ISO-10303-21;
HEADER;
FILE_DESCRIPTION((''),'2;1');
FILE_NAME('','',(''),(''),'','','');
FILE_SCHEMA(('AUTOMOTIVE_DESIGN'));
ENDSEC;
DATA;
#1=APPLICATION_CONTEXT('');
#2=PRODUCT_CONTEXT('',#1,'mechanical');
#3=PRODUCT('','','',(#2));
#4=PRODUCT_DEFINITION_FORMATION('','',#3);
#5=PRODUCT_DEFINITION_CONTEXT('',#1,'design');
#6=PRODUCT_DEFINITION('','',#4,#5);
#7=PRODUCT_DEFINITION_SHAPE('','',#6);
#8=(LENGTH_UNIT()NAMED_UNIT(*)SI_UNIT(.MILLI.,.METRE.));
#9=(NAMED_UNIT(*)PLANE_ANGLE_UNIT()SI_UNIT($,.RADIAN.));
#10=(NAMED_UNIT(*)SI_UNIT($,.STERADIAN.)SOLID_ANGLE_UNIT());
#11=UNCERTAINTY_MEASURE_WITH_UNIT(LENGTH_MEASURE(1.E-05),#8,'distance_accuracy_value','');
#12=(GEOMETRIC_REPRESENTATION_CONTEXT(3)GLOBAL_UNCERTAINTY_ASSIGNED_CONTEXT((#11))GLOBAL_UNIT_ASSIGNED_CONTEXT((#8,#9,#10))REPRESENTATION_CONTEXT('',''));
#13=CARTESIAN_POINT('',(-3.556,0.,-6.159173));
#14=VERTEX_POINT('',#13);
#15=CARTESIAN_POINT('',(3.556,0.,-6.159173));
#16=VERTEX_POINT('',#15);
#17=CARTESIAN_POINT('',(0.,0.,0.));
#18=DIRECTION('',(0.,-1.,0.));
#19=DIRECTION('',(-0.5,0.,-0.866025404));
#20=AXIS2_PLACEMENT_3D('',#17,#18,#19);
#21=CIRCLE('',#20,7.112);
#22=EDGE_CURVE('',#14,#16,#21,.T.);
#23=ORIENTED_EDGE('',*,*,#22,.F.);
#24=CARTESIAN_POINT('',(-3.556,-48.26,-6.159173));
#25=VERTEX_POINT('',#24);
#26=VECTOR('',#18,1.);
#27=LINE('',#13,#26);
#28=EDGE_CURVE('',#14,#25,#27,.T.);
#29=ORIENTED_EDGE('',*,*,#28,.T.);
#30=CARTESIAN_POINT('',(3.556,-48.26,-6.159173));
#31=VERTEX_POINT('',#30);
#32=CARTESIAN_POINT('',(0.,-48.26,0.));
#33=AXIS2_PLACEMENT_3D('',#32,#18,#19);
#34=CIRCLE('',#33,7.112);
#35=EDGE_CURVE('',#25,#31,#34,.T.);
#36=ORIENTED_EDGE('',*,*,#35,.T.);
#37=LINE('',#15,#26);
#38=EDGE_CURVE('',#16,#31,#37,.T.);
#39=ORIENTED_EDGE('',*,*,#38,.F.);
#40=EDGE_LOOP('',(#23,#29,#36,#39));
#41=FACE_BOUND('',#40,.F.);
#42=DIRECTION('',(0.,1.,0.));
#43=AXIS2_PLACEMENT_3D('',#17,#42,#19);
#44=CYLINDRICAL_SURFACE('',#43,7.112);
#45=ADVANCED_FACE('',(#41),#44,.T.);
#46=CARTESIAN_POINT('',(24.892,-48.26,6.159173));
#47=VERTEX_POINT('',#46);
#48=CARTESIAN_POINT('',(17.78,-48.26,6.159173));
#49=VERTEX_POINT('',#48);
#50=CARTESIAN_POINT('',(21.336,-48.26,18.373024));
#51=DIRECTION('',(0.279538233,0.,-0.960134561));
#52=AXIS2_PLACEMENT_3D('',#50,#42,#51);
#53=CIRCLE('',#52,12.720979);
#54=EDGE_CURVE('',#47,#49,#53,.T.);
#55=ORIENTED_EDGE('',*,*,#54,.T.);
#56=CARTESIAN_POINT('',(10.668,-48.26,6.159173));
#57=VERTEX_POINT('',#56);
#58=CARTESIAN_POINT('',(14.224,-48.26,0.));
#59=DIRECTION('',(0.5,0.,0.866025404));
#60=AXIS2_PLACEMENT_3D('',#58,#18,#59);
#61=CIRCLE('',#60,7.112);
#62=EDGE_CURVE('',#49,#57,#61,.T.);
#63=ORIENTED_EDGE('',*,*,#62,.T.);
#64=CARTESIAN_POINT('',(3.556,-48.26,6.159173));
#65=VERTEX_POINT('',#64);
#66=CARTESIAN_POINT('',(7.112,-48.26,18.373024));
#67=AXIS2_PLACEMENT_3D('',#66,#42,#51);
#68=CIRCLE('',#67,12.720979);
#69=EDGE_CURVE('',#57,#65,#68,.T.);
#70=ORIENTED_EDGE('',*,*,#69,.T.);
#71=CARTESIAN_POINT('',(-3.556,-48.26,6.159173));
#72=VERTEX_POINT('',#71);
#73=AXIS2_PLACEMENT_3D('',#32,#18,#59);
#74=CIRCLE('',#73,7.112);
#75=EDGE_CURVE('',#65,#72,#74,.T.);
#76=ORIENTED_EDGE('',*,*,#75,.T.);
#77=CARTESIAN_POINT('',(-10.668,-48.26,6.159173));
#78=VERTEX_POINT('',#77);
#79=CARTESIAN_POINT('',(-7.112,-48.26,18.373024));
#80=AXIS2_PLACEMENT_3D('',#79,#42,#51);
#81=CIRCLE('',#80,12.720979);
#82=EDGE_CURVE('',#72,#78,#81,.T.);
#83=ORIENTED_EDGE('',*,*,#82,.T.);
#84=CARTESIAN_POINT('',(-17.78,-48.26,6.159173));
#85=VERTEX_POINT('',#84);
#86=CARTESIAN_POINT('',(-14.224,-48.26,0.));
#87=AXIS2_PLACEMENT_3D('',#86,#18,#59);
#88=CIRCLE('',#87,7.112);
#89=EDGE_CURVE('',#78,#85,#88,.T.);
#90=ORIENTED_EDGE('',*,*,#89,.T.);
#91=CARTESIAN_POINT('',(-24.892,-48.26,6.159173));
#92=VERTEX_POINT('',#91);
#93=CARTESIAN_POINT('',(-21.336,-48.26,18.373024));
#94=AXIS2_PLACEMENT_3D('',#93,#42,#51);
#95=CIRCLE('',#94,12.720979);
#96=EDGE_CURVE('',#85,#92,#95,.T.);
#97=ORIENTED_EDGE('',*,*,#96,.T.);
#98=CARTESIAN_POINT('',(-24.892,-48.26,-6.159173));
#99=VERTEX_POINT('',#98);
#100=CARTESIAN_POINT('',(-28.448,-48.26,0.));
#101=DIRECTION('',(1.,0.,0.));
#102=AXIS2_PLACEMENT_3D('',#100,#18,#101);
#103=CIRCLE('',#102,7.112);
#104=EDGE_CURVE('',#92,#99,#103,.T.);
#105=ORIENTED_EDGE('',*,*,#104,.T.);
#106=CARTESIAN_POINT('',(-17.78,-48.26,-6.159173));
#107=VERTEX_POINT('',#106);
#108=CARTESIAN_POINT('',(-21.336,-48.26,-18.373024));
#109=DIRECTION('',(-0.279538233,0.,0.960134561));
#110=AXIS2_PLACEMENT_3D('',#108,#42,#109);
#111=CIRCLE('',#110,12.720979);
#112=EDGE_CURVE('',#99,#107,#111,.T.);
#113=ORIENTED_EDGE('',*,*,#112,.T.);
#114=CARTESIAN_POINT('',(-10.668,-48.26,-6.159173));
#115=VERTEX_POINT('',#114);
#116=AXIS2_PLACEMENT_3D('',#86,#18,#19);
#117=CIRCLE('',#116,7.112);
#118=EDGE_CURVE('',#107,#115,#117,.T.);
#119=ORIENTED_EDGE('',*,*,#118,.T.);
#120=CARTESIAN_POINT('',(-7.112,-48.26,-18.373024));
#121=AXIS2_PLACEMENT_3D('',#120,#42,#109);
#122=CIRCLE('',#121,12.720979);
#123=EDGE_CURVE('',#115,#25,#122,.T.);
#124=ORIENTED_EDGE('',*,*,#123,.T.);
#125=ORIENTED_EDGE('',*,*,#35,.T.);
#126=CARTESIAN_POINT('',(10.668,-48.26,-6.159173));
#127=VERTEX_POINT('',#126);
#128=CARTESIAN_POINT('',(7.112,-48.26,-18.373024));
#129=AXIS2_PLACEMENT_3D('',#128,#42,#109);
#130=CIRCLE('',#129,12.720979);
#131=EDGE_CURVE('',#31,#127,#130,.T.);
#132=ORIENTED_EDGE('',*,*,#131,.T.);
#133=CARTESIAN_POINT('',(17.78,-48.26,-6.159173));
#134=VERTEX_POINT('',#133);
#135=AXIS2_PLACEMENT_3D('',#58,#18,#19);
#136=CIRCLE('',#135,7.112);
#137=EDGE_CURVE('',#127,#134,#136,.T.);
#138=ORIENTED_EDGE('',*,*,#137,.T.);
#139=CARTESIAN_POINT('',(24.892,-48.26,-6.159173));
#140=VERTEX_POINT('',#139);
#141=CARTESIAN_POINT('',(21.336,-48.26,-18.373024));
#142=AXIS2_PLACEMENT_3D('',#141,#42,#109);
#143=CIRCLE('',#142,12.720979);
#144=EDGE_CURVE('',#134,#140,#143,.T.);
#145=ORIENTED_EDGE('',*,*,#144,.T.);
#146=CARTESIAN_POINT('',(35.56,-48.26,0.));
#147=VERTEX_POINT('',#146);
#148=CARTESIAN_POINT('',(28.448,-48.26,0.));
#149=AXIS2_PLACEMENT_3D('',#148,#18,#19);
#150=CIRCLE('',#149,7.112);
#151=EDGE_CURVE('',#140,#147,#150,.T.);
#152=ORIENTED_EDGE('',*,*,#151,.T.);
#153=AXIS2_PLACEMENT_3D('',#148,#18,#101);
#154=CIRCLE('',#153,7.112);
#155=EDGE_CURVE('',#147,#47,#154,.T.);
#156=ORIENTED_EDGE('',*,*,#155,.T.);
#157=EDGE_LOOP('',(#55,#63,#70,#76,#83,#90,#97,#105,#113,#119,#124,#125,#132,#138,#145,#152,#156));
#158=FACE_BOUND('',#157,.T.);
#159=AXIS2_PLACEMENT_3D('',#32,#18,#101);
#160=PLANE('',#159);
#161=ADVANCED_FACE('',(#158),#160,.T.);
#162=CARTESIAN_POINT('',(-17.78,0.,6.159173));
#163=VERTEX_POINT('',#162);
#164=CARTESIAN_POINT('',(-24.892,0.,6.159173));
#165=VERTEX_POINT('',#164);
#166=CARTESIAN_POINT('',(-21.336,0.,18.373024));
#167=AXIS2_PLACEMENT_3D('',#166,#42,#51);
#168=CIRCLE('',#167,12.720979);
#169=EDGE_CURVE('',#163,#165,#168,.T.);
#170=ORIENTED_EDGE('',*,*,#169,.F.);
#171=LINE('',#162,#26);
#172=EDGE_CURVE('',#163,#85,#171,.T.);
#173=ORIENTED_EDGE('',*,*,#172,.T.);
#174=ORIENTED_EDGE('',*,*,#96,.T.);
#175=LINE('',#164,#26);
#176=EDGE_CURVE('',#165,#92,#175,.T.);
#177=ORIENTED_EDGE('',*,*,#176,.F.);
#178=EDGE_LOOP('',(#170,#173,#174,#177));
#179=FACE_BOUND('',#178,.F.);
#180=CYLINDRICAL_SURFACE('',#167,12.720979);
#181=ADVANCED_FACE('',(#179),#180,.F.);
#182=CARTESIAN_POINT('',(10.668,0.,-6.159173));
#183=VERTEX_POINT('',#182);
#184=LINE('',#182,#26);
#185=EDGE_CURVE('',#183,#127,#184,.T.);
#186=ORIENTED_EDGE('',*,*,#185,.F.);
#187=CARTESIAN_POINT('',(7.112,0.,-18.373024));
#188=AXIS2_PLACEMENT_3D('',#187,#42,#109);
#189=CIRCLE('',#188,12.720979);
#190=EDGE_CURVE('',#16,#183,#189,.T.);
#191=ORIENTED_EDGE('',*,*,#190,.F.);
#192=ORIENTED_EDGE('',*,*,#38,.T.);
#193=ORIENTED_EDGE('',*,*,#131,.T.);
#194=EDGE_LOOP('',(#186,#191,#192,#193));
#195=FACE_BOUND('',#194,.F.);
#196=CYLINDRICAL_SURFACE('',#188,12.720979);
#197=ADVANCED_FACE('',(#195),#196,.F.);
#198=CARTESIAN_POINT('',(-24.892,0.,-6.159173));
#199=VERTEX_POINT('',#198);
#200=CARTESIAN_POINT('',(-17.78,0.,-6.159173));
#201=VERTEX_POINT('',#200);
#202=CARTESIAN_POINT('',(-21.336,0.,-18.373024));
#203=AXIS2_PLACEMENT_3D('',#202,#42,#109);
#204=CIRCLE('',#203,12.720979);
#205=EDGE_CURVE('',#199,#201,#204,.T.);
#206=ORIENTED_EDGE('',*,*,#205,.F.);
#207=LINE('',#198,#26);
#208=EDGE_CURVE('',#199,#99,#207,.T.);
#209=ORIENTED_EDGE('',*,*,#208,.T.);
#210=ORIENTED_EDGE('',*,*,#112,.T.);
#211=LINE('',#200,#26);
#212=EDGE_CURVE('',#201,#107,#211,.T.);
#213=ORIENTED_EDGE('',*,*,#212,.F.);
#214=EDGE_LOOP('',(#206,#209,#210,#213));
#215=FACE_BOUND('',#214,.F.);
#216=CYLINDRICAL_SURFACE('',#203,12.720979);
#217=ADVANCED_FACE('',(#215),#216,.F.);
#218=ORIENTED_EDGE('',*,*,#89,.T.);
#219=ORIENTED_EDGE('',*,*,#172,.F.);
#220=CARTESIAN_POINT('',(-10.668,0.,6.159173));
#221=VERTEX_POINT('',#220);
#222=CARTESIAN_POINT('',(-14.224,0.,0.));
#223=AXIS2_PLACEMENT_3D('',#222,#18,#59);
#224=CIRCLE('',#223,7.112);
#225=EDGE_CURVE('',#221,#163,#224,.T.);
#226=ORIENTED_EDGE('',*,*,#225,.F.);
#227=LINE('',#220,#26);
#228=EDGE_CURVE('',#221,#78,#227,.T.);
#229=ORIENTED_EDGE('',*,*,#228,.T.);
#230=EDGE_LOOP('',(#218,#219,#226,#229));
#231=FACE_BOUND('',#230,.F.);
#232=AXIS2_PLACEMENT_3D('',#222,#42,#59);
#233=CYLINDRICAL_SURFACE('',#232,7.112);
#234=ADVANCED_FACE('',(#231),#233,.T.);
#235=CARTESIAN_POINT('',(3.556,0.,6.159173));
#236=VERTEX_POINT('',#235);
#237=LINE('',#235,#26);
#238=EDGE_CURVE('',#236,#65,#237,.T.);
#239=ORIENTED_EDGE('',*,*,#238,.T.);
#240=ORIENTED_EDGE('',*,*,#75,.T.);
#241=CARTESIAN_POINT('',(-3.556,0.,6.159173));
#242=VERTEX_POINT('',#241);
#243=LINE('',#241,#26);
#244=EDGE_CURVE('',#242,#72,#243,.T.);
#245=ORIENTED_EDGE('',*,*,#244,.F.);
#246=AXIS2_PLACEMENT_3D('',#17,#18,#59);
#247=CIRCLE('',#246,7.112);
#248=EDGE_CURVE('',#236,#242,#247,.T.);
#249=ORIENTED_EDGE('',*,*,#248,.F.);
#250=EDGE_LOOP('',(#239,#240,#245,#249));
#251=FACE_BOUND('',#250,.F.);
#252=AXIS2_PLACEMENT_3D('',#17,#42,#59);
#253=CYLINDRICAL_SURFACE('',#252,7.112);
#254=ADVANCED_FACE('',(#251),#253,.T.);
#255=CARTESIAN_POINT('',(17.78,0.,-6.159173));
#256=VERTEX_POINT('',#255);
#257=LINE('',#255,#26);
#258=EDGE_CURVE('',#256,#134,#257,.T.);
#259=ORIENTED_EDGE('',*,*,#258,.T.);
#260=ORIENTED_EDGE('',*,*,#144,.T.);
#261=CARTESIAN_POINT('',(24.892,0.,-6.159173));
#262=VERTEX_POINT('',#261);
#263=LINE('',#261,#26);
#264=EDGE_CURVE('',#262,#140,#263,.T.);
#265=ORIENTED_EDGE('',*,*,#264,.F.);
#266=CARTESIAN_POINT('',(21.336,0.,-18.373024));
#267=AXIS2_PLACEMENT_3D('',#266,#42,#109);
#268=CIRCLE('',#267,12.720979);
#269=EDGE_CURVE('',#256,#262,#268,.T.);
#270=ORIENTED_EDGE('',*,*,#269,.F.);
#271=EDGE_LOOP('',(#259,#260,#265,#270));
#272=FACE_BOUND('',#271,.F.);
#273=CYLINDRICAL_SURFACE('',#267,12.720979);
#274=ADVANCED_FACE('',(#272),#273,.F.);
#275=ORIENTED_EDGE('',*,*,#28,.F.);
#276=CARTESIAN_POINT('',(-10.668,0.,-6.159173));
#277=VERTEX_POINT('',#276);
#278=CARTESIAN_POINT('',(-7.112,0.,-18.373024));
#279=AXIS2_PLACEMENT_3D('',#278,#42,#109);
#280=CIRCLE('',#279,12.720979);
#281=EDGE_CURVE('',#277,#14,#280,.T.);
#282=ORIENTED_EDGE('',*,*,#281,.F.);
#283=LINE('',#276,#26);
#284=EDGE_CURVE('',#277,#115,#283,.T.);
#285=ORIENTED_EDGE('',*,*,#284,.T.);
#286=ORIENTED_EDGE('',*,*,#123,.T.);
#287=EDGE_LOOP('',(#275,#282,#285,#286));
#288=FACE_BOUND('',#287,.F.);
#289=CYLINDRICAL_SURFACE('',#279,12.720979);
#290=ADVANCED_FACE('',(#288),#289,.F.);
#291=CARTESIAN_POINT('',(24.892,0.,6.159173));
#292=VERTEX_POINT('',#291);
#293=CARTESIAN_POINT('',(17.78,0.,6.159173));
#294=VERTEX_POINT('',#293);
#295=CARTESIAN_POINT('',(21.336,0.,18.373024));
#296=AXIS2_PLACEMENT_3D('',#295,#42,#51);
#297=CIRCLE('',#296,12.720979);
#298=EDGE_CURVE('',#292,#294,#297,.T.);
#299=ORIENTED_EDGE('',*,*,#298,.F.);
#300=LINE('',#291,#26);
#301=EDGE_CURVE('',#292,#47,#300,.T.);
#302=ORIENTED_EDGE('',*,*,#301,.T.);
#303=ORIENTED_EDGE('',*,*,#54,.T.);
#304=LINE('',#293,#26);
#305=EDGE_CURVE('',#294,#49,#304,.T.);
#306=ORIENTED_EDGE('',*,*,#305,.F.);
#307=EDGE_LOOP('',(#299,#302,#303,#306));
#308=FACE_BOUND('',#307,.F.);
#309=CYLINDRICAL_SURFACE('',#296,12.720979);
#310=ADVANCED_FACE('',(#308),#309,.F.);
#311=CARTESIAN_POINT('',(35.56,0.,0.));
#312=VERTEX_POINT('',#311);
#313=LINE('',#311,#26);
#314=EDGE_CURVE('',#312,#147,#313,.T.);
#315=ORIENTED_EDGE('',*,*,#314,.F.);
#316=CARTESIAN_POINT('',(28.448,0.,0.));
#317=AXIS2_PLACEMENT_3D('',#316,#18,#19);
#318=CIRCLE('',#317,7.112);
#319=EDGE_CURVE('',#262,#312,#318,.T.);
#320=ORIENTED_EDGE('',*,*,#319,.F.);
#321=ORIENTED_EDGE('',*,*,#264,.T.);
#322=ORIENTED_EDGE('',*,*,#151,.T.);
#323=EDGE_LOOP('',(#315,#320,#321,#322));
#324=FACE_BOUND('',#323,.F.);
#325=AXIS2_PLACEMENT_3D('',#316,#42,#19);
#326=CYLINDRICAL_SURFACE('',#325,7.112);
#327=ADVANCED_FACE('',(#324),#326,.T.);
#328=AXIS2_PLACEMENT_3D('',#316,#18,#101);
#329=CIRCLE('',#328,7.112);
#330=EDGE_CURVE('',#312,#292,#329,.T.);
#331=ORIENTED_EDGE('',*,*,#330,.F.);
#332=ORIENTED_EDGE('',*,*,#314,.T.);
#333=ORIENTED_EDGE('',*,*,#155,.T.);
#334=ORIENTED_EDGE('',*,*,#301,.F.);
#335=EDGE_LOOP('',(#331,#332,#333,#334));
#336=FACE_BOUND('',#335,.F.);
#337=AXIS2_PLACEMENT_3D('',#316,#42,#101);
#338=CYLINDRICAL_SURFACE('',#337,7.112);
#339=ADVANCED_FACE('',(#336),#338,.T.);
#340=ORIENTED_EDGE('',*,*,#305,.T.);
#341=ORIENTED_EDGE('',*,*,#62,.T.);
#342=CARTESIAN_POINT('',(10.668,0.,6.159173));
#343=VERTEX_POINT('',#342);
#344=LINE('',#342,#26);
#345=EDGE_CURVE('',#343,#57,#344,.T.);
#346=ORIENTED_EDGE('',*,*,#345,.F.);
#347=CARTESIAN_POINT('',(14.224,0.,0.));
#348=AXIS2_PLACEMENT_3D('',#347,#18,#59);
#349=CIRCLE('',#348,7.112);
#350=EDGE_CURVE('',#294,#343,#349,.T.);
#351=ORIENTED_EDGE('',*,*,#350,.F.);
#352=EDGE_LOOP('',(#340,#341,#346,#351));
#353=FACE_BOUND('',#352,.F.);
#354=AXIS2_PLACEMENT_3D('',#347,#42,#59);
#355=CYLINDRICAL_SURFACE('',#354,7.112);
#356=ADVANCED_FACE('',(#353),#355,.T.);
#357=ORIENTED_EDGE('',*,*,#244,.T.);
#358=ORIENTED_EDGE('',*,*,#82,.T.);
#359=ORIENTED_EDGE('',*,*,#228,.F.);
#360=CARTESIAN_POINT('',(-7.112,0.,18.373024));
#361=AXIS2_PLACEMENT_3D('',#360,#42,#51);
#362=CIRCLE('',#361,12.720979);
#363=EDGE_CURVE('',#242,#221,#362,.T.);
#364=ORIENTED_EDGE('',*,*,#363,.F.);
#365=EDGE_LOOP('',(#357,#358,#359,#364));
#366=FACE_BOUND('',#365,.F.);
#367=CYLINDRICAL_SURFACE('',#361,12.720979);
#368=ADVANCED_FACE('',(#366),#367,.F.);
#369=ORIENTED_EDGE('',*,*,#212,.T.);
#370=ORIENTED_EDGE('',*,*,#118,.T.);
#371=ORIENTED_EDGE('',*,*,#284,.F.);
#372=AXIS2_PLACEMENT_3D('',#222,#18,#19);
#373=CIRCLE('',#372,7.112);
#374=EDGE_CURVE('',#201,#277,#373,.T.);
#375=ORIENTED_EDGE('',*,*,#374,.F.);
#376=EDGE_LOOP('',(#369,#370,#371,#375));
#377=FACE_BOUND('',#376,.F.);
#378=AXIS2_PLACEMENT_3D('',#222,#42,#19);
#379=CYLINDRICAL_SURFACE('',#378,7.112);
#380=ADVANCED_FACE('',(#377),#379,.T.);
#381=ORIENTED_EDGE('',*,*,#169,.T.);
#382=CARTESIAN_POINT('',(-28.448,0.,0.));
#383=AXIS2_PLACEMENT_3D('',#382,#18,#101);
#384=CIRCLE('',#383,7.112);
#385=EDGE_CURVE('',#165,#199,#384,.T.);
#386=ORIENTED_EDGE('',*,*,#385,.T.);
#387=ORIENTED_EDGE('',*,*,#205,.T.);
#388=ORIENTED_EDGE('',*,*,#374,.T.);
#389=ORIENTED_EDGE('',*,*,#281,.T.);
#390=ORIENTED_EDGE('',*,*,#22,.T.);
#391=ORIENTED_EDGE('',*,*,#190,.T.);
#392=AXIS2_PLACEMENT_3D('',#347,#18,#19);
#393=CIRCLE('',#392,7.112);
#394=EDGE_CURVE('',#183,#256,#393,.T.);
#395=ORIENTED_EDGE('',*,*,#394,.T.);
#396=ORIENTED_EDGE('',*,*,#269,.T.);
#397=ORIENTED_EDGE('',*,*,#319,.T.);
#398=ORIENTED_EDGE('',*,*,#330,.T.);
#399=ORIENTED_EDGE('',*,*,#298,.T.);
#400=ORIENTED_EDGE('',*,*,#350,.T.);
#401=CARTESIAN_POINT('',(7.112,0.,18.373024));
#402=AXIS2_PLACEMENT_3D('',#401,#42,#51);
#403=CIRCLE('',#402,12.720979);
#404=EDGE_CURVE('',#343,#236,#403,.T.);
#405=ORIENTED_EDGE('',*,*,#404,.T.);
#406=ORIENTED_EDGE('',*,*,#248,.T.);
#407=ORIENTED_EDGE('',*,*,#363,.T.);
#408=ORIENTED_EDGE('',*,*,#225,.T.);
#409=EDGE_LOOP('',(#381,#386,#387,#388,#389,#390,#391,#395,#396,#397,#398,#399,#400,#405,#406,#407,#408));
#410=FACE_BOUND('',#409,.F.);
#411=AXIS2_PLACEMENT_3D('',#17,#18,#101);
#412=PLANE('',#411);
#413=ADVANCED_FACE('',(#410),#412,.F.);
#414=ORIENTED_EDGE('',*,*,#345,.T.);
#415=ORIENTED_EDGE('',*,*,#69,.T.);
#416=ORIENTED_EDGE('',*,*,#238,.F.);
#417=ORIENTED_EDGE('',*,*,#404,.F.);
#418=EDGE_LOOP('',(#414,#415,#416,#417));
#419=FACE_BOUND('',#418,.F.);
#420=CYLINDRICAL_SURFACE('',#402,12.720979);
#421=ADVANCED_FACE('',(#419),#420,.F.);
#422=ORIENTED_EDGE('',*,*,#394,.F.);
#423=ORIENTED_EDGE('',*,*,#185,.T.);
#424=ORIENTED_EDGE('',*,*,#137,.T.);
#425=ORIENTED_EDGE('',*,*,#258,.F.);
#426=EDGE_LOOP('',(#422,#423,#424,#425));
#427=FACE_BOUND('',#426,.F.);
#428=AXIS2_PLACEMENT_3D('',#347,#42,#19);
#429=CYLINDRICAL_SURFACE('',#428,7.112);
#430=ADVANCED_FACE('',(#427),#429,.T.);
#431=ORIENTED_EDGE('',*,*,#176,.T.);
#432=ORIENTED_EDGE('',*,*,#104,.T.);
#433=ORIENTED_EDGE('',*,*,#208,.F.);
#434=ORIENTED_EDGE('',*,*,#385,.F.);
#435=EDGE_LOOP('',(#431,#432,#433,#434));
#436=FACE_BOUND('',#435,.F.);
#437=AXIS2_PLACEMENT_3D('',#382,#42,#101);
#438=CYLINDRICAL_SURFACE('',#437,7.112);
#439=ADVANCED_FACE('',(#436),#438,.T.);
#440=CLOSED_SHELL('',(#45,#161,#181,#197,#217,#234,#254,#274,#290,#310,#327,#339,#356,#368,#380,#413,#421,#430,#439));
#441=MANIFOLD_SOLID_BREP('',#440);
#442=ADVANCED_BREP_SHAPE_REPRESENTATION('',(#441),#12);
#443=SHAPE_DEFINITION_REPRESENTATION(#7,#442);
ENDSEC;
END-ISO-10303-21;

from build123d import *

# Parameters (mm, degrees)
F1_DEPTH = 48.26


# Not quite as in the source:
# - a feature names something its author has since deleted; it is built from what else it names


with BuildPart() as f1:
    # F0 (on Front) → F1 (new body)
    with BuildSketch(Plane.XZ):
        with BuildLine():
            ThreePointArc((3.556, -6.1591726717), (6.1591726717, -3.556), (7.112, 0))
            ThreePointArc((7.112, 0), (6.1591726717, 3.556), (3.556, 6.1591726717))
            ThreePointArc((3.556, 6.1591726717), (0, 7.112), (-3.556, 6.1591726717))
            ThreePointArc((-3.556, 6.1591726717), (-6.1591726717, 3.556), (-7.112, 0))
            ThreePointArc((-7.112, 0), (-6.1591726717, -3.556), (-3.556, -6.1591726717))
            ThreePointArc((-3.556, -6.1591726717), (0, -7.112), (3.556, -6.1591726717))
        make_face()
        with BuildLine():
            ThreePointArc((-10.668, -6.1591726717), (-8.0648273283, -3.556), (-7.112, 0))
            ThreePointArc((-7.112, 0), (-8.0648273283, 3.556), (-10.668, 6.1591726717))
            ThreePointArc((-10.668, 6.1591726717), (-14.224, 7.112), (-17.78, 6.1591726717))
            ThreePointArc((-17.78, 6.1591726717), (-20.3831726717, 3.556), (-21.336, 0))
            ThreePointArc((-21.336, 0), (-20.3831726717, -3.556), (-17.78, -6.1591726717))
            ThreePointArc((-17.78, -6.1591726717), (-14.224, -7.112), (-10.668, -6.1591726717))
        make_face()
        with BuildLine():
            ThreePointArc((-24.892, -6.1591726717), (-22.2888273283, -3.556), (-21.336, 0))
            ThreePointArc((-21.336, 0), (-22.2888273283, 3.556), (-24.892, 6.1591726717))
            ThreePointArc((-24.892, 6.1591726717), (-35.56, 0), (-24.892, -6.1591726717))
        make_face()
        with BuildLine():
            ThreePointArc((10.668, 6.1591726717), (8.0648273283, 3.556), (7.112, 0))
            ThreePointArc((7.112, 0), (8.0648273283, -3.556), (10.668, -6.1591726717))
            ThreePointArc((10.668, -6.1591726717), (14.224, -7.112), (17.78, -6.1591726717))
            ThreePointArc((17.78, -6.1591726717), (20.3831726717, -3.556), (21.336, 0))
            ThreePointArc((21.336, 0), (20.3831726717, 3.556), (17.78, 6.1591726717))
            ThreePointArc((17.78, 6.1591726717), (14.224, 7.112), (10.668, 6.1591726717))
        make_face()
        with BuildLine():
            ThreePointArc((24.892, 6.1591726717), (22.2888273283, 3.556), (21.336, 0))
            ThreePointArc((21.336, 0), (22.2888273283, -3.556), (24.892, -6.1591726717))
            ThreePointArc((24.892, -6.1591726717), (32.004, -6.1591726717), (35.56, 0))
            ThreePointArc((35.56, 0), (32.004, 6.1591726717), (24.892, 6.1591726717))
        make_face()
        with BuildLine():
            ThreePointArc((3.556, 6.1591726717), (6.1591726717, 3.556), (7.112, 0))
            ThreePointArc((7.112, 0), (8.0648273283, 3.556), (10.668, 6.1591726717))
            ThreePointArc((10.668, 6.1591726717), (7.112, 5.6520452644), (3.556, 6.1591726717))
        make_face()
        with BuildLine():
            ThreePointArc((24.892, 6.1591726717), (21.336, 5.6520452644), (17.78, 6.1591726717))
            ThreePointArc((17.78, 6.1591726717), (20.3831726717, 3.556), (21.336, 0))
            ThreePointArc((21.336, 0), (22.2888273283, 3.556), (24.892, 6.1591726717))
        make_face()
        with BuildLine():
            ThreePointArc((-7.112, 0), (-6.1591726717, 3.556), (-3.556, 6.1591726717))
            ThreePointArc((-3.556, 6.1591726717), (-7.112, 5.6520452644), (-10.668, 6.1591726717))
            ThreePointArc((-10.668, 6.1591726717), (-8.0648273283, 3.556), (-7.112, 0))
        make_face()
        with BuildLine():
            ThreePointArc((-21.336, 0), (-20.3831726717, 3.556), (-17.78, 6.1591726717))
            ThreePointArc((-17.78, 6.1591726717), (-21.336, 5.6520452644), (-24.892, 6.1591726717))
            ThreePointArc((-24.892, 6.1591726717), (-22.2888273283, 3.556), (-21.336, 0))
        make_face()
        with BuildLine():
            ThreePointArc((-24.892, -6.1591726717), (-21.336, -5.6520452644), (-17.78, -6.1591726717))
            ThreePointArc((-17.78, -6.1591726717), (-20.3831726717, -3.556), (-21.336, 0))
            ThreePointArc((-21.336, 0), (-22.2888273283, -3.556), (-24.892, -6.1591726717))
        make_face()
        with BuildLine():
            ThreePointArc((-10.668, -6.1591726717), (-7.112, -5.6520452644), (-3.556, -6.1591726717))
            ThreePointArc((-3.556, -6.1591726717), (-6.1591726717, -3.556), (-7.112, 0))
            ThreePointArc((-7.112, 0), (-8.0648273283, -3.556), (-10.668, -6.1591726717))
        make_face()
        with BuildLine():
            ThreePointArc((10.668, -6.1591726717), (8.0648273283, -3.556), (7.112, 0))
            ThreePointArc((7.112, 0), (6.1591726717, -3.556), (3.556, -6.1591726717))
            ThreePointArc((3.556, -6.1591726717), (7.112, -5.6520452644), (10.668, -6.1591726717))
        make_face()
        with BuildLine():
            ThreePointArc((21.336, 0), (20.3831726717, -3.556), (17.78, -6.1591726717))
            ThreePointArc((17.78, -6.1591726717), (21.336, -5.6520452644), (24.892, -6.1591726717))
            ThreePointArc((24.892, -6.1591726717), (22.2888273283, -3.556), (21.336, 0))
        make_face()
    extrude(amount=F1_DEPTH)


solid = f1.part
